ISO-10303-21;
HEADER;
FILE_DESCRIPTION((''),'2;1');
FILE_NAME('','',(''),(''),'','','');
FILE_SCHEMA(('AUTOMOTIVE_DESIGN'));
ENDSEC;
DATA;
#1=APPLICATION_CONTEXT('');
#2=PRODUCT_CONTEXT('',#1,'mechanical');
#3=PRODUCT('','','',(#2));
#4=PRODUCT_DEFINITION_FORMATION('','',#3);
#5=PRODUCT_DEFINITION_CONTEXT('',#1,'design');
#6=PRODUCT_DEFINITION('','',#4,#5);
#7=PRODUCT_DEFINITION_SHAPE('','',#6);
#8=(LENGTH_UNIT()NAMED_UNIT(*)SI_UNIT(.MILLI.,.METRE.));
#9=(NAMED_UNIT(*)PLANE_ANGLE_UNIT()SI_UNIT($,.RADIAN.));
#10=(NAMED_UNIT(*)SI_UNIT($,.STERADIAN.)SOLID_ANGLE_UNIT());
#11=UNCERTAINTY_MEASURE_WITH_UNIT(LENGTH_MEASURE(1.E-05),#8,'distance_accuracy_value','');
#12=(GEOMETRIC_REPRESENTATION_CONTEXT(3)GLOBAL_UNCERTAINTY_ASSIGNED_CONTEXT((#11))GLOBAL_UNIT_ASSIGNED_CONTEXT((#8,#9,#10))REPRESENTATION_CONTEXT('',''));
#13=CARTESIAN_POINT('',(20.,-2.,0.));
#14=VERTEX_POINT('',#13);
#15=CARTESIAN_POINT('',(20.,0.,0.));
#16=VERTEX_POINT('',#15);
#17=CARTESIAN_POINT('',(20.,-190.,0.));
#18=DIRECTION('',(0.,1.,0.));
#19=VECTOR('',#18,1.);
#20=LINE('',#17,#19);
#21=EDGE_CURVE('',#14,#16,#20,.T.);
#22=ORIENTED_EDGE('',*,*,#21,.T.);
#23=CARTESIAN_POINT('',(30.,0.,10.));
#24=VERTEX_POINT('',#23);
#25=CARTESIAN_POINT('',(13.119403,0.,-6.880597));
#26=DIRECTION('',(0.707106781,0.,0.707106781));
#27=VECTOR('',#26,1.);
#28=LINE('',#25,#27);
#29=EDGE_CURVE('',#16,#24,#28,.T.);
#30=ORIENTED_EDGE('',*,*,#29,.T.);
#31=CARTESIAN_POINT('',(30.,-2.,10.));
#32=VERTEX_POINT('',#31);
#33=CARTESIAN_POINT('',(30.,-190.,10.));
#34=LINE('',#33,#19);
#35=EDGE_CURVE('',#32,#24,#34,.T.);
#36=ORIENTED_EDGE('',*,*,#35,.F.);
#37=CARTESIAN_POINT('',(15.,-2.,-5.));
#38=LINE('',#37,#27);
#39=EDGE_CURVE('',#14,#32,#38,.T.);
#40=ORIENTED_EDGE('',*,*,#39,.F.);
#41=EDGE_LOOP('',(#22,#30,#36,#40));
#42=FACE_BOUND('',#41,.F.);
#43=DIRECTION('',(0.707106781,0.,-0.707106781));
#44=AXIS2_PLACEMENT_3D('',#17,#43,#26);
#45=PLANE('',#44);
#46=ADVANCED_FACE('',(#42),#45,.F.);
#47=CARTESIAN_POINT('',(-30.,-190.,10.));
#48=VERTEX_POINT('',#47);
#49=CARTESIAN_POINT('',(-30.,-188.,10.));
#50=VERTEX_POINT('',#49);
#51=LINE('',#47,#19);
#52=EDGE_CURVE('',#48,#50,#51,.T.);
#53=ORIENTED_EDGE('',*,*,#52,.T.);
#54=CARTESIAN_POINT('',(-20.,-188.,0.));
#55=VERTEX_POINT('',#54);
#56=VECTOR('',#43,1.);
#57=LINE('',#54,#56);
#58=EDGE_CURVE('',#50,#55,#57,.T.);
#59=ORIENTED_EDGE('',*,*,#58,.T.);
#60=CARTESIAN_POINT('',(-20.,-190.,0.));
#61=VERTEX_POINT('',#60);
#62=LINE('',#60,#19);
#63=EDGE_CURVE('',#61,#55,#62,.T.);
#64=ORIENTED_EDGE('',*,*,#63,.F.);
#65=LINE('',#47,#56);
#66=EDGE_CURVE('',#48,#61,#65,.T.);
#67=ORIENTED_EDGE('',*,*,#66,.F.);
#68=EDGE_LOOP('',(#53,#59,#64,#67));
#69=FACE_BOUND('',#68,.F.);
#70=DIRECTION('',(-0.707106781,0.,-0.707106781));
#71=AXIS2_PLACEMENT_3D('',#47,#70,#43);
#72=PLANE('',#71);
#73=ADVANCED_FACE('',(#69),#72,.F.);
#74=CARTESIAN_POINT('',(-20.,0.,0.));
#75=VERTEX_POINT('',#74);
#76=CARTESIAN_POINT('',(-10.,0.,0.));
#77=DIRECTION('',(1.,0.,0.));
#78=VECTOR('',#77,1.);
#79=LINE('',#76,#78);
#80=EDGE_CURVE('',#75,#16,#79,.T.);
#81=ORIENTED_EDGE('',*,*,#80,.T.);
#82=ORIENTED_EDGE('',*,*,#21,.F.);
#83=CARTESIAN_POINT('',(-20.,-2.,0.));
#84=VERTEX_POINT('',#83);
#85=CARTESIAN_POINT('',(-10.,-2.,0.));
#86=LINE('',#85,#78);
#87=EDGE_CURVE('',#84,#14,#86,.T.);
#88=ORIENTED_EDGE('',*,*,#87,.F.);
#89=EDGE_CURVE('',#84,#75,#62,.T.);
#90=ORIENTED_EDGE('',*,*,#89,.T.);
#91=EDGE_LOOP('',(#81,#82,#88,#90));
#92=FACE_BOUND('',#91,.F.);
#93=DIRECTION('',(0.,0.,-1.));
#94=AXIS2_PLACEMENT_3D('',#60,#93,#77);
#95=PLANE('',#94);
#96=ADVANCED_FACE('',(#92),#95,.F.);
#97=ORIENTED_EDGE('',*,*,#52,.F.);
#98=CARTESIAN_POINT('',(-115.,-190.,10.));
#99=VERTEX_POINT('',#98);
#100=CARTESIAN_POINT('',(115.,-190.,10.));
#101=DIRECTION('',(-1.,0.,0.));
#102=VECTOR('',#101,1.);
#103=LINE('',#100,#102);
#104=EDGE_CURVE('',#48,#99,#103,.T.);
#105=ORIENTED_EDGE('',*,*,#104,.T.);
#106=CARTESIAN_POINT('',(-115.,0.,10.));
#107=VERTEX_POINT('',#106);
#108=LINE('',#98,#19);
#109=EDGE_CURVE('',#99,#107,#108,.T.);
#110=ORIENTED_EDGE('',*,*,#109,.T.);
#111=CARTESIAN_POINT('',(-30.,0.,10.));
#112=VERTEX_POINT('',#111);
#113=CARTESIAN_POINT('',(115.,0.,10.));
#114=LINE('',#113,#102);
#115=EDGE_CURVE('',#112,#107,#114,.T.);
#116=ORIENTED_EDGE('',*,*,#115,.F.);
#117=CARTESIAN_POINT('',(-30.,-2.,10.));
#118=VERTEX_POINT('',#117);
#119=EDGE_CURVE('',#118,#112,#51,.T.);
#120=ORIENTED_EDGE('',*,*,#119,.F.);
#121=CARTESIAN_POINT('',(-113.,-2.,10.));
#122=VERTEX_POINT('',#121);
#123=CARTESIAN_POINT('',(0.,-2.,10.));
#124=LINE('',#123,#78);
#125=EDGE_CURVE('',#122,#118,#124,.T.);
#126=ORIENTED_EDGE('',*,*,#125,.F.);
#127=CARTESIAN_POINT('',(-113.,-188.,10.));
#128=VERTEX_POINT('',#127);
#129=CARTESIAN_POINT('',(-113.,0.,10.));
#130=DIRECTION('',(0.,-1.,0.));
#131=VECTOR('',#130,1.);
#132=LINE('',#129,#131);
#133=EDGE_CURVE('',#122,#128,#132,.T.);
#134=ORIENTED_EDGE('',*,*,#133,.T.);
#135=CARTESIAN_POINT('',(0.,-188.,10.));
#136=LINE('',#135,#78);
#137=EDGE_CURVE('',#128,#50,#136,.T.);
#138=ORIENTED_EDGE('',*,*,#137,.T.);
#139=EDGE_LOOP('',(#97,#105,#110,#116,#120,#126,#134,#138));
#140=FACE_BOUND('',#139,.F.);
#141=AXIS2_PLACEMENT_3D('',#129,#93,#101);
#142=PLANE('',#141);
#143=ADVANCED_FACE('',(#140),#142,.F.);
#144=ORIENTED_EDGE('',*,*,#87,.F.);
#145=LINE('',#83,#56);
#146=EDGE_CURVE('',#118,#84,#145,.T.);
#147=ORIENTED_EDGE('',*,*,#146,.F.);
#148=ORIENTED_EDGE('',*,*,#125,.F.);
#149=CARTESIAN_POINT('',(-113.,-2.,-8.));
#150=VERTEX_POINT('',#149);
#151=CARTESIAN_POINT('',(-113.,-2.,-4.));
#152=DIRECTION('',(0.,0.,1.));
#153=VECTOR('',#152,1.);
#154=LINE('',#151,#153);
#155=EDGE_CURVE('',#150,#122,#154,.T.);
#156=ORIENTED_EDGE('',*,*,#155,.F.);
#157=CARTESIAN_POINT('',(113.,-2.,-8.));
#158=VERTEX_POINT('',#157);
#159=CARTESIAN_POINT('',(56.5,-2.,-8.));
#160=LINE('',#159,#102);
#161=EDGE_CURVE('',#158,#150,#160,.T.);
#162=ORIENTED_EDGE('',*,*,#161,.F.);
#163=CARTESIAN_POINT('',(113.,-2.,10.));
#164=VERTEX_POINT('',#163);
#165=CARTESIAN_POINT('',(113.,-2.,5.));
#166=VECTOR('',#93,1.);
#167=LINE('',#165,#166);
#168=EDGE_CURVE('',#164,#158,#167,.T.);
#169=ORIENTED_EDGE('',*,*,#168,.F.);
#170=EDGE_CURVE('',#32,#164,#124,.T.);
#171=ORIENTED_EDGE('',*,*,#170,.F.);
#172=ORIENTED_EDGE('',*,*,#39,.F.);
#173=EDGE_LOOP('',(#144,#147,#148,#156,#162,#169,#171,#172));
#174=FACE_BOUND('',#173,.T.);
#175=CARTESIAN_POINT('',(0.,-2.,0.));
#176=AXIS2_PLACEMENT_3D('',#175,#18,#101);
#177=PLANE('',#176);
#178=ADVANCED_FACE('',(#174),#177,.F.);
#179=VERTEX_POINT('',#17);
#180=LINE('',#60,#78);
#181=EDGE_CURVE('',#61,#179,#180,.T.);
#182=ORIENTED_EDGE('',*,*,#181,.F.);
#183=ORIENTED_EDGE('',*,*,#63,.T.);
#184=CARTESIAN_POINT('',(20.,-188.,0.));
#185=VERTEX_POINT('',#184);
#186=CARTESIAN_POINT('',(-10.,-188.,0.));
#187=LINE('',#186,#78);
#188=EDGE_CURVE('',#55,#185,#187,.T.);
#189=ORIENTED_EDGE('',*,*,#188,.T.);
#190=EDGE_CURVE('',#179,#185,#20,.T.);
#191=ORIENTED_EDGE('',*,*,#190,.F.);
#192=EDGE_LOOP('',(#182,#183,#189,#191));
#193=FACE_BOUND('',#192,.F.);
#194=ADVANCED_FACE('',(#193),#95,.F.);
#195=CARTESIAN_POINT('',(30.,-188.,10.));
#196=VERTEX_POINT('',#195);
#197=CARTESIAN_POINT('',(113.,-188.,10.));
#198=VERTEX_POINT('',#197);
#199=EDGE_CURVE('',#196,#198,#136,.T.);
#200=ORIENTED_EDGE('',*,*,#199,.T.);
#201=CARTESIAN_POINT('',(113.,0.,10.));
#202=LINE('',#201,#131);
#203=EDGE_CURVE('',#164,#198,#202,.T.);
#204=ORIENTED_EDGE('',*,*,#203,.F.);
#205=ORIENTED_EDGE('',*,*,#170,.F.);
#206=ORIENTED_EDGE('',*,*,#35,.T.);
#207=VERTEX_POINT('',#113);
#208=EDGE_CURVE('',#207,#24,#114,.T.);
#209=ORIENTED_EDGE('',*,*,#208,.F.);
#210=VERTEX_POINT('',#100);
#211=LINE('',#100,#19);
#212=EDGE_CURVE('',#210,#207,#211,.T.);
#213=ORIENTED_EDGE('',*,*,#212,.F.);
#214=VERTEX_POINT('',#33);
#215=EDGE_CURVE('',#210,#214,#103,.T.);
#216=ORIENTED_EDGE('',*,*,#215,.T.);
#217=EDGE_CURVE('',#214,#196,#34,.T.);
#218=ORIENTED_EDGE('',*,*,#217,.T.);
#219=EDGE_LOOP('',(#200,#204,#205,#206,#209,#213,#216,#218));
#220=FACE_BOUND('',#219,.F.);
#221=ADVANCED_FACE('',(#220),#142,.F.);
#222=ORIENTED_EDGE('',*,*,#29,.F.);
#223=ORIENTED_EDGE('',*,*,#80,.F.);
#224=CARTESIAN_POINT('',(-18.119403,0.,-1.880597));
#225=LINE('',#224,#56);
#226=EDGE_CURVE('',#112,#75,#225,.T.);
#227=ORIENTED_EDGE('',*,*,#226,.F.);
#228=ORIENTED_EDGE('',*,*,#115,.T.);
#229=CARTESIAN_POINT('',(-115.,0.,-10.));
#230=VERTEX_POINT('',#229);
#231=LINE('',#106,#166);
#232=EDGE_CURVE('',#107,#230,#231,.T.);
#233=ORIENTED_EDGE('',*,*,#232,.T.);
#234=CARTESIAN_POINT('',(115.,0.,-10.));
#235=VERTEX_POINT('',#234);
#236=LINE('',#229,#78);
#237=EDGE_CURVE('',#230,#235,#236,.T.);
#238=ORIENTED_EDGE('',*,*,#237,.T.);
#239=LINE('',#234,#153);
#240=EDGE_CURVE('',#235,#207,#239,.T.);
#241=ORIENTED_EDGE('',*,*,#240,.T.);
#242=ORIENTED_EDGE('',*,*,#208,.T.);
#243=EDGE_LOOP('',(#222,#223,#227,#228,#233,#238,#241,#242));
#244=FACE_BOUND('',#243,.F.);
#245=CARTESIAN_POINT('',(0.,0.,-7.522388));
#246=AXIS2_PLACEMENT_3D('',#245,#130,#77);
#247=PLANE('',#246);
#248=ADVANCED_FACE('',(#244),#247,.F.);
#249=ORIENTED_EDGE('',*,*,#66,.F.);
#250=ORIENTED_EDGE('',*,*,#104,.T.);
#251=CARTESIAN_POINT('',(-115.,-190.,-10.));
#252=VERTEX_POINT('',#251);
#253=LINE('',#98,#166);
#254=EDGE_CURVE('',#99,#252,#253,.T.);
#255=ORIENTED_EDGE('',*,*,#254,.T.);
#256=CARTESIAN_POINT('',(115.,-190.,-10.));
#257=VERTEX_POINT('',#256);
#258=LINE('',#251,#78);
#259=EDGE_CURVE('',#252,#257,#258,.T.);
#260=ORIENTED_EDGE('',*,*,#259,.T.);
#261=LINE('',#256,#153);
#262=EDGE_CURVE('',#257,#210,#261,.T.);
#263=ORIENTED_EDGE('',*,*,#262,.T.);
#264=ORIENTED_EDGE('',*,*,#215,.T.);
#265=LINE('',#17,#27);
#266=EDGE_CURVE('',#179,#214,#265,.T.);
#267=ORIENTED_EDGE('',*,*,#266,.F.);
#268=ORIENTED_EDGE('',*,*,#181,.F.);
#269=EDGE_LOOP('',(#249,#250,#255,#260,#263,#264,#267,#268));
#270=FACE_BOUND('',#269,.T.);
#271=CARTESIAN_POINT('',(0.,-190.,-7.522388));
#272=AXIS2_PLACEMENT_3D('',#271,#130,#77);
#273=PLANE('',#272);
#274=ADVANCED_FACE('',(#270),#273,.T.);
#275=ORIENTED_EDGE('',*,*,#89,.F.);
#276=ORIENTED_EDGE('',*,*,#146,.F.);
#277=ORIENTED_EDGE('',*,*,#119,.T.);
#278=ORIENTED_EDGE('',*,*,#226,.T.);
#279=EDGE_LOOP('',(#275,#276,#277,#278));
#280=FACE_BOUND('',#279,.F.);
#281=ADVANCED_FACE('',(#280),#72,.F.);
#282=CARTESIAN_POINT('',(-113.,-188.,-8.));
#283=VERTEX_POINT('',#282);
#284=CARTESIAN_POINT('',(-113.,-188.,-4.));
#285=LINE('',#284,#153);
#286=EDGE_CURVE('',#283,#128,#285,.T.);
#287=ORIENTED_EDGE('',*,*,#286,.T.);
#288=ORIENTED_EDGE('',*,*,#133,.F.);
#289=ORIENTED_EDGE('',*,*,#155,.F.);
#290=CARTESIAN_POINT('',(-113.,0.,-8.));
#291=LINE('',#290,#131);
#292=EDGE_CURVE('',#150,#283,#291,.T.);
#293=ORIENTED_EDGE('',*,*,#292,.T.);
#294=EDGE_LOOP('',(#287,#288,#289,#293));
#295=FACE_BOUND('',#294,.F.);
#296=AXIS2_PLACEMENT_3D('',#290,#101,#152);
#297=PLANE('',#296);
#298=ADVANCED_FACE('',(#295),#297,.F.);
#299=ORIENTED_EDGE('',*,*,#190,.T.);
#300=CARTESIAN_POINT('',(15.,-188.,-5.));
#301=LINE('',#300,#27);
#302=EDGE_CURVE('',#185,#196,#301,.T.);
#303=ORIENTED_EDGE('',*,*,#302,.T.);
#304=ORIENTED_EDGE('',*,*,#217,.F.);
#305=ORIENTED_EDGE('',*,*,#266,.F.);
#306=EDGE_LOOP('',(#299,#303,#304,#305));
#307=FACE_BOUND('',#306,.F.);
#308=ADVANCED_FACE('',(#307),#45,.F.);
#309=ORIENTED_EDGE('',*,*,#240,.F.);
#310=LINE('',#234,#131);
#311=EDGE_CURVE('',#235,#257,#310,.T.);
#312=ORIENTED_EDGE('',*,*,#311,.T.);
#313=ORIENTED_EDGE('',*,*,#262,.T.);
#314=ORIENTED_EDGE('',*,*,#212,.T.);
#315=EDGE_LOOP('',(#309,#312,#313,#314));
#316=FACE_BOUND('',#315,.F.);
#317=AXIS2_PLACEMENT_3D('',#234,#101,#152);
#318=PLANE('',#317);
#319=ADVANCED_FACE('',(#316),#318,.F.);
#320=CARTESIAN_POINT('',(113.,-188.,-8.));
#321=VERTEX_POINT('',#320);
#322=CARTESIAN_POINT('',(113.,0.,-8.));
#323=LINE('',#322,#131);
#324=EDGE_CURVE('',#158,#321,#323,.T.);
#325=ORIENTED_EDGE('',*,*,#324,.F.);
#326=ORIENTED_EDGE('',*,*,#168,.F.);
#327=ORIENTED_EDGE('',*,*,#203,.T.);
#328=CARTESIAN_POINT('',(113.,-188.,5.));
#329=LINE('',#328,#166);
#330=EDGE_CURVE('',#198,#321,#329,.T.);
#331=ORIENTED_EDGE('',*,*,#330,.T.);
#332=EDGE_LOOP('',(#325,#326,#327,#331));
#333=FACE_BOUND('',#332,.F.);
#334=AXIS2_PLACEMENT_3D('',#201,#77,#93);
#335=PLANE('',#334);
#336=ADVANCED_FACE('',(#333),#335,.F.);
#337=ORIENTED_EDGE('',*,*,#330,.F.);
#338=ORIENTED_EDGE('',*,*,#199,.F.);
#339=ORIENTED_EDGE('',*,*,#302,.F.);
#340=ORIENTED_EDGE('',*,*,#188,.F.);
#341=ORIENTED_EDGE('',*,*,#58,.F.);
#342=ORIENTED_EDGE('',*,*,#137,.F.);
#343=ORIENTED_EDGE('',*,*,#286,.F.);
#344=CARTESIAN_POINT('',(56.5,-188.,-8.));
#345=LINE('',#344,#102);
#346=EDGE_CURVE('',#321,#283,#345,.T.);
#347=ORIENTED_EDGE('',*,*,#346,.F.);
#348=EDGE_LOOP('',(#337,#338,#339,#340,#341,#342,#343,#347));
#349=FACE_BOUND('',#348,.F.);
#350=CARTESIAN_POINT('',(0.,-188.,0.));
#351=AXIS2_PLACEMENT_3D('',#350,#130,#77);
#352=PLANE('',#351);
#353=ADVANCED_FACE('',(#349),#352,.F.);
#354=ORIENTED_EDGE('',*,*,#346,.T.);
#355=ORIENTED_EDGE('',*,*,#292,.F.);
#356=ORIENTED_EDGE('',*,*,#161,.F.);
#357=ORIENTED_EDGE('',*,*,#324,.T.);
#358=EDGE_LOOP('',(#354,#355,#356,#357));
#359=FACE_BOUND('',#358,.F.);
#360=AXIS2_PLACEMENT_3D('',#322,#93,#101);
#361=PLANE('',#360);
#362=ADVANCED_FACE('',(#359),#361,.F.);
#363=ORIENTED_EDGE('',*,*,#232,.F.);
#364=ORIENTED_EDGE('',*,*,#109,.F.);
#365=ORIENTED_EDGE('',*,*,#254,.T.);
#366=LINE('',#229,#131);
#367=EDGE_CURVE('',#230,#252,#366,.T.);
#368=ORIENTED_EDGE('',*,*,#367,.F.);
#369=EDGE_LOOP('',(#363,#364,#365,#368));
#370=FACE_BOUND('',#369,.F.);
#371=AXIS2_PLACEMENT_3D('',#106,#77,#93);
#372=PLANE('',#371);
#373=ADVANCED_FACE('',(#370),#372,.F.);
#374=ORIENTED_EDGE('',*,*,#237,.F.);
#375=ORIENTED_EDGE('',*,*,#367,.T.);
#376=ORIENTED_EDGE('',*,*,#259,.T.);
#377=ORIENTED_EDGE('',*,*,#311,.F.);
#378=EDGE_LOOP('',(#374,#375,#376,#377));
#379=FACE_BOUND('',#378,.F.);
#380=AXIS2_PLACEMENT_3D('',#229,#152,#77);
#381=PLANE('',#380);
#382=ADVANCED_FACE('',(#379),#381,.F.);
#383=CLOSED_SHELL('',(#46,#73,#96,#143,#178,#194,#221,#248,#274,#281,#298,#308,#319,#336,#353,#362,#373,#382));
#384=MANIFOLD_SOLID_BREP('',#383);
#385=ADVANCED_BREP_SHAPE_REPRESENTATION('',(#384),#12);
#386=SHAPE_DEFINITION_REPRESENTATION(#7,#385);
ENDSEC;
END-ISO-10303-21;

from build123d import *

# Parameters (mm, degrees)
F1_DEPTH = 190
F2_W     = 230
F2_H     = 20
F3_DEPTH = 2
F6_DEPTH = 190.001


# Not quite as in the source:
# - a pattern or mirror of a feature is missing from the dataset's text; its kind, count and spacing are read off the source's solid


with BuildPart() as f1:
    # F0 (on Front) → F1 (new body)
    with BuildSketch(Plane.XZ):
        Polygon((-115, 10), (-115, -10), (115, -10), (115, 10), (113, 10), (113, -8), (-113, -8), (-113, 10), align=None)
    extrude(amount=F1_DEPTH)

    # F2 (on face) → F3 (join)
    with BuildSketch(Plane.XZ.offset(190)):
        Rectangle(F2_W, F2_H)
    f3 = extrude(amount=-F3_DEPTH)

    # F3_copies: F3 across plane
    add(f3.mirror(Plane.ZX.offset(-95)))

    # F5 (on face) → F6 (cut, through all)
    with BuildSketch(Plane.XZ.offset(190)):
        Polygon((-20, 0), (0, 0), (20, 0), (30, 10), (0, 10), (-30, 10), align=None)
    extrude(amount=-F6_DEPTH, mode=Mode.SUBTRACT)


solid = f1.part
